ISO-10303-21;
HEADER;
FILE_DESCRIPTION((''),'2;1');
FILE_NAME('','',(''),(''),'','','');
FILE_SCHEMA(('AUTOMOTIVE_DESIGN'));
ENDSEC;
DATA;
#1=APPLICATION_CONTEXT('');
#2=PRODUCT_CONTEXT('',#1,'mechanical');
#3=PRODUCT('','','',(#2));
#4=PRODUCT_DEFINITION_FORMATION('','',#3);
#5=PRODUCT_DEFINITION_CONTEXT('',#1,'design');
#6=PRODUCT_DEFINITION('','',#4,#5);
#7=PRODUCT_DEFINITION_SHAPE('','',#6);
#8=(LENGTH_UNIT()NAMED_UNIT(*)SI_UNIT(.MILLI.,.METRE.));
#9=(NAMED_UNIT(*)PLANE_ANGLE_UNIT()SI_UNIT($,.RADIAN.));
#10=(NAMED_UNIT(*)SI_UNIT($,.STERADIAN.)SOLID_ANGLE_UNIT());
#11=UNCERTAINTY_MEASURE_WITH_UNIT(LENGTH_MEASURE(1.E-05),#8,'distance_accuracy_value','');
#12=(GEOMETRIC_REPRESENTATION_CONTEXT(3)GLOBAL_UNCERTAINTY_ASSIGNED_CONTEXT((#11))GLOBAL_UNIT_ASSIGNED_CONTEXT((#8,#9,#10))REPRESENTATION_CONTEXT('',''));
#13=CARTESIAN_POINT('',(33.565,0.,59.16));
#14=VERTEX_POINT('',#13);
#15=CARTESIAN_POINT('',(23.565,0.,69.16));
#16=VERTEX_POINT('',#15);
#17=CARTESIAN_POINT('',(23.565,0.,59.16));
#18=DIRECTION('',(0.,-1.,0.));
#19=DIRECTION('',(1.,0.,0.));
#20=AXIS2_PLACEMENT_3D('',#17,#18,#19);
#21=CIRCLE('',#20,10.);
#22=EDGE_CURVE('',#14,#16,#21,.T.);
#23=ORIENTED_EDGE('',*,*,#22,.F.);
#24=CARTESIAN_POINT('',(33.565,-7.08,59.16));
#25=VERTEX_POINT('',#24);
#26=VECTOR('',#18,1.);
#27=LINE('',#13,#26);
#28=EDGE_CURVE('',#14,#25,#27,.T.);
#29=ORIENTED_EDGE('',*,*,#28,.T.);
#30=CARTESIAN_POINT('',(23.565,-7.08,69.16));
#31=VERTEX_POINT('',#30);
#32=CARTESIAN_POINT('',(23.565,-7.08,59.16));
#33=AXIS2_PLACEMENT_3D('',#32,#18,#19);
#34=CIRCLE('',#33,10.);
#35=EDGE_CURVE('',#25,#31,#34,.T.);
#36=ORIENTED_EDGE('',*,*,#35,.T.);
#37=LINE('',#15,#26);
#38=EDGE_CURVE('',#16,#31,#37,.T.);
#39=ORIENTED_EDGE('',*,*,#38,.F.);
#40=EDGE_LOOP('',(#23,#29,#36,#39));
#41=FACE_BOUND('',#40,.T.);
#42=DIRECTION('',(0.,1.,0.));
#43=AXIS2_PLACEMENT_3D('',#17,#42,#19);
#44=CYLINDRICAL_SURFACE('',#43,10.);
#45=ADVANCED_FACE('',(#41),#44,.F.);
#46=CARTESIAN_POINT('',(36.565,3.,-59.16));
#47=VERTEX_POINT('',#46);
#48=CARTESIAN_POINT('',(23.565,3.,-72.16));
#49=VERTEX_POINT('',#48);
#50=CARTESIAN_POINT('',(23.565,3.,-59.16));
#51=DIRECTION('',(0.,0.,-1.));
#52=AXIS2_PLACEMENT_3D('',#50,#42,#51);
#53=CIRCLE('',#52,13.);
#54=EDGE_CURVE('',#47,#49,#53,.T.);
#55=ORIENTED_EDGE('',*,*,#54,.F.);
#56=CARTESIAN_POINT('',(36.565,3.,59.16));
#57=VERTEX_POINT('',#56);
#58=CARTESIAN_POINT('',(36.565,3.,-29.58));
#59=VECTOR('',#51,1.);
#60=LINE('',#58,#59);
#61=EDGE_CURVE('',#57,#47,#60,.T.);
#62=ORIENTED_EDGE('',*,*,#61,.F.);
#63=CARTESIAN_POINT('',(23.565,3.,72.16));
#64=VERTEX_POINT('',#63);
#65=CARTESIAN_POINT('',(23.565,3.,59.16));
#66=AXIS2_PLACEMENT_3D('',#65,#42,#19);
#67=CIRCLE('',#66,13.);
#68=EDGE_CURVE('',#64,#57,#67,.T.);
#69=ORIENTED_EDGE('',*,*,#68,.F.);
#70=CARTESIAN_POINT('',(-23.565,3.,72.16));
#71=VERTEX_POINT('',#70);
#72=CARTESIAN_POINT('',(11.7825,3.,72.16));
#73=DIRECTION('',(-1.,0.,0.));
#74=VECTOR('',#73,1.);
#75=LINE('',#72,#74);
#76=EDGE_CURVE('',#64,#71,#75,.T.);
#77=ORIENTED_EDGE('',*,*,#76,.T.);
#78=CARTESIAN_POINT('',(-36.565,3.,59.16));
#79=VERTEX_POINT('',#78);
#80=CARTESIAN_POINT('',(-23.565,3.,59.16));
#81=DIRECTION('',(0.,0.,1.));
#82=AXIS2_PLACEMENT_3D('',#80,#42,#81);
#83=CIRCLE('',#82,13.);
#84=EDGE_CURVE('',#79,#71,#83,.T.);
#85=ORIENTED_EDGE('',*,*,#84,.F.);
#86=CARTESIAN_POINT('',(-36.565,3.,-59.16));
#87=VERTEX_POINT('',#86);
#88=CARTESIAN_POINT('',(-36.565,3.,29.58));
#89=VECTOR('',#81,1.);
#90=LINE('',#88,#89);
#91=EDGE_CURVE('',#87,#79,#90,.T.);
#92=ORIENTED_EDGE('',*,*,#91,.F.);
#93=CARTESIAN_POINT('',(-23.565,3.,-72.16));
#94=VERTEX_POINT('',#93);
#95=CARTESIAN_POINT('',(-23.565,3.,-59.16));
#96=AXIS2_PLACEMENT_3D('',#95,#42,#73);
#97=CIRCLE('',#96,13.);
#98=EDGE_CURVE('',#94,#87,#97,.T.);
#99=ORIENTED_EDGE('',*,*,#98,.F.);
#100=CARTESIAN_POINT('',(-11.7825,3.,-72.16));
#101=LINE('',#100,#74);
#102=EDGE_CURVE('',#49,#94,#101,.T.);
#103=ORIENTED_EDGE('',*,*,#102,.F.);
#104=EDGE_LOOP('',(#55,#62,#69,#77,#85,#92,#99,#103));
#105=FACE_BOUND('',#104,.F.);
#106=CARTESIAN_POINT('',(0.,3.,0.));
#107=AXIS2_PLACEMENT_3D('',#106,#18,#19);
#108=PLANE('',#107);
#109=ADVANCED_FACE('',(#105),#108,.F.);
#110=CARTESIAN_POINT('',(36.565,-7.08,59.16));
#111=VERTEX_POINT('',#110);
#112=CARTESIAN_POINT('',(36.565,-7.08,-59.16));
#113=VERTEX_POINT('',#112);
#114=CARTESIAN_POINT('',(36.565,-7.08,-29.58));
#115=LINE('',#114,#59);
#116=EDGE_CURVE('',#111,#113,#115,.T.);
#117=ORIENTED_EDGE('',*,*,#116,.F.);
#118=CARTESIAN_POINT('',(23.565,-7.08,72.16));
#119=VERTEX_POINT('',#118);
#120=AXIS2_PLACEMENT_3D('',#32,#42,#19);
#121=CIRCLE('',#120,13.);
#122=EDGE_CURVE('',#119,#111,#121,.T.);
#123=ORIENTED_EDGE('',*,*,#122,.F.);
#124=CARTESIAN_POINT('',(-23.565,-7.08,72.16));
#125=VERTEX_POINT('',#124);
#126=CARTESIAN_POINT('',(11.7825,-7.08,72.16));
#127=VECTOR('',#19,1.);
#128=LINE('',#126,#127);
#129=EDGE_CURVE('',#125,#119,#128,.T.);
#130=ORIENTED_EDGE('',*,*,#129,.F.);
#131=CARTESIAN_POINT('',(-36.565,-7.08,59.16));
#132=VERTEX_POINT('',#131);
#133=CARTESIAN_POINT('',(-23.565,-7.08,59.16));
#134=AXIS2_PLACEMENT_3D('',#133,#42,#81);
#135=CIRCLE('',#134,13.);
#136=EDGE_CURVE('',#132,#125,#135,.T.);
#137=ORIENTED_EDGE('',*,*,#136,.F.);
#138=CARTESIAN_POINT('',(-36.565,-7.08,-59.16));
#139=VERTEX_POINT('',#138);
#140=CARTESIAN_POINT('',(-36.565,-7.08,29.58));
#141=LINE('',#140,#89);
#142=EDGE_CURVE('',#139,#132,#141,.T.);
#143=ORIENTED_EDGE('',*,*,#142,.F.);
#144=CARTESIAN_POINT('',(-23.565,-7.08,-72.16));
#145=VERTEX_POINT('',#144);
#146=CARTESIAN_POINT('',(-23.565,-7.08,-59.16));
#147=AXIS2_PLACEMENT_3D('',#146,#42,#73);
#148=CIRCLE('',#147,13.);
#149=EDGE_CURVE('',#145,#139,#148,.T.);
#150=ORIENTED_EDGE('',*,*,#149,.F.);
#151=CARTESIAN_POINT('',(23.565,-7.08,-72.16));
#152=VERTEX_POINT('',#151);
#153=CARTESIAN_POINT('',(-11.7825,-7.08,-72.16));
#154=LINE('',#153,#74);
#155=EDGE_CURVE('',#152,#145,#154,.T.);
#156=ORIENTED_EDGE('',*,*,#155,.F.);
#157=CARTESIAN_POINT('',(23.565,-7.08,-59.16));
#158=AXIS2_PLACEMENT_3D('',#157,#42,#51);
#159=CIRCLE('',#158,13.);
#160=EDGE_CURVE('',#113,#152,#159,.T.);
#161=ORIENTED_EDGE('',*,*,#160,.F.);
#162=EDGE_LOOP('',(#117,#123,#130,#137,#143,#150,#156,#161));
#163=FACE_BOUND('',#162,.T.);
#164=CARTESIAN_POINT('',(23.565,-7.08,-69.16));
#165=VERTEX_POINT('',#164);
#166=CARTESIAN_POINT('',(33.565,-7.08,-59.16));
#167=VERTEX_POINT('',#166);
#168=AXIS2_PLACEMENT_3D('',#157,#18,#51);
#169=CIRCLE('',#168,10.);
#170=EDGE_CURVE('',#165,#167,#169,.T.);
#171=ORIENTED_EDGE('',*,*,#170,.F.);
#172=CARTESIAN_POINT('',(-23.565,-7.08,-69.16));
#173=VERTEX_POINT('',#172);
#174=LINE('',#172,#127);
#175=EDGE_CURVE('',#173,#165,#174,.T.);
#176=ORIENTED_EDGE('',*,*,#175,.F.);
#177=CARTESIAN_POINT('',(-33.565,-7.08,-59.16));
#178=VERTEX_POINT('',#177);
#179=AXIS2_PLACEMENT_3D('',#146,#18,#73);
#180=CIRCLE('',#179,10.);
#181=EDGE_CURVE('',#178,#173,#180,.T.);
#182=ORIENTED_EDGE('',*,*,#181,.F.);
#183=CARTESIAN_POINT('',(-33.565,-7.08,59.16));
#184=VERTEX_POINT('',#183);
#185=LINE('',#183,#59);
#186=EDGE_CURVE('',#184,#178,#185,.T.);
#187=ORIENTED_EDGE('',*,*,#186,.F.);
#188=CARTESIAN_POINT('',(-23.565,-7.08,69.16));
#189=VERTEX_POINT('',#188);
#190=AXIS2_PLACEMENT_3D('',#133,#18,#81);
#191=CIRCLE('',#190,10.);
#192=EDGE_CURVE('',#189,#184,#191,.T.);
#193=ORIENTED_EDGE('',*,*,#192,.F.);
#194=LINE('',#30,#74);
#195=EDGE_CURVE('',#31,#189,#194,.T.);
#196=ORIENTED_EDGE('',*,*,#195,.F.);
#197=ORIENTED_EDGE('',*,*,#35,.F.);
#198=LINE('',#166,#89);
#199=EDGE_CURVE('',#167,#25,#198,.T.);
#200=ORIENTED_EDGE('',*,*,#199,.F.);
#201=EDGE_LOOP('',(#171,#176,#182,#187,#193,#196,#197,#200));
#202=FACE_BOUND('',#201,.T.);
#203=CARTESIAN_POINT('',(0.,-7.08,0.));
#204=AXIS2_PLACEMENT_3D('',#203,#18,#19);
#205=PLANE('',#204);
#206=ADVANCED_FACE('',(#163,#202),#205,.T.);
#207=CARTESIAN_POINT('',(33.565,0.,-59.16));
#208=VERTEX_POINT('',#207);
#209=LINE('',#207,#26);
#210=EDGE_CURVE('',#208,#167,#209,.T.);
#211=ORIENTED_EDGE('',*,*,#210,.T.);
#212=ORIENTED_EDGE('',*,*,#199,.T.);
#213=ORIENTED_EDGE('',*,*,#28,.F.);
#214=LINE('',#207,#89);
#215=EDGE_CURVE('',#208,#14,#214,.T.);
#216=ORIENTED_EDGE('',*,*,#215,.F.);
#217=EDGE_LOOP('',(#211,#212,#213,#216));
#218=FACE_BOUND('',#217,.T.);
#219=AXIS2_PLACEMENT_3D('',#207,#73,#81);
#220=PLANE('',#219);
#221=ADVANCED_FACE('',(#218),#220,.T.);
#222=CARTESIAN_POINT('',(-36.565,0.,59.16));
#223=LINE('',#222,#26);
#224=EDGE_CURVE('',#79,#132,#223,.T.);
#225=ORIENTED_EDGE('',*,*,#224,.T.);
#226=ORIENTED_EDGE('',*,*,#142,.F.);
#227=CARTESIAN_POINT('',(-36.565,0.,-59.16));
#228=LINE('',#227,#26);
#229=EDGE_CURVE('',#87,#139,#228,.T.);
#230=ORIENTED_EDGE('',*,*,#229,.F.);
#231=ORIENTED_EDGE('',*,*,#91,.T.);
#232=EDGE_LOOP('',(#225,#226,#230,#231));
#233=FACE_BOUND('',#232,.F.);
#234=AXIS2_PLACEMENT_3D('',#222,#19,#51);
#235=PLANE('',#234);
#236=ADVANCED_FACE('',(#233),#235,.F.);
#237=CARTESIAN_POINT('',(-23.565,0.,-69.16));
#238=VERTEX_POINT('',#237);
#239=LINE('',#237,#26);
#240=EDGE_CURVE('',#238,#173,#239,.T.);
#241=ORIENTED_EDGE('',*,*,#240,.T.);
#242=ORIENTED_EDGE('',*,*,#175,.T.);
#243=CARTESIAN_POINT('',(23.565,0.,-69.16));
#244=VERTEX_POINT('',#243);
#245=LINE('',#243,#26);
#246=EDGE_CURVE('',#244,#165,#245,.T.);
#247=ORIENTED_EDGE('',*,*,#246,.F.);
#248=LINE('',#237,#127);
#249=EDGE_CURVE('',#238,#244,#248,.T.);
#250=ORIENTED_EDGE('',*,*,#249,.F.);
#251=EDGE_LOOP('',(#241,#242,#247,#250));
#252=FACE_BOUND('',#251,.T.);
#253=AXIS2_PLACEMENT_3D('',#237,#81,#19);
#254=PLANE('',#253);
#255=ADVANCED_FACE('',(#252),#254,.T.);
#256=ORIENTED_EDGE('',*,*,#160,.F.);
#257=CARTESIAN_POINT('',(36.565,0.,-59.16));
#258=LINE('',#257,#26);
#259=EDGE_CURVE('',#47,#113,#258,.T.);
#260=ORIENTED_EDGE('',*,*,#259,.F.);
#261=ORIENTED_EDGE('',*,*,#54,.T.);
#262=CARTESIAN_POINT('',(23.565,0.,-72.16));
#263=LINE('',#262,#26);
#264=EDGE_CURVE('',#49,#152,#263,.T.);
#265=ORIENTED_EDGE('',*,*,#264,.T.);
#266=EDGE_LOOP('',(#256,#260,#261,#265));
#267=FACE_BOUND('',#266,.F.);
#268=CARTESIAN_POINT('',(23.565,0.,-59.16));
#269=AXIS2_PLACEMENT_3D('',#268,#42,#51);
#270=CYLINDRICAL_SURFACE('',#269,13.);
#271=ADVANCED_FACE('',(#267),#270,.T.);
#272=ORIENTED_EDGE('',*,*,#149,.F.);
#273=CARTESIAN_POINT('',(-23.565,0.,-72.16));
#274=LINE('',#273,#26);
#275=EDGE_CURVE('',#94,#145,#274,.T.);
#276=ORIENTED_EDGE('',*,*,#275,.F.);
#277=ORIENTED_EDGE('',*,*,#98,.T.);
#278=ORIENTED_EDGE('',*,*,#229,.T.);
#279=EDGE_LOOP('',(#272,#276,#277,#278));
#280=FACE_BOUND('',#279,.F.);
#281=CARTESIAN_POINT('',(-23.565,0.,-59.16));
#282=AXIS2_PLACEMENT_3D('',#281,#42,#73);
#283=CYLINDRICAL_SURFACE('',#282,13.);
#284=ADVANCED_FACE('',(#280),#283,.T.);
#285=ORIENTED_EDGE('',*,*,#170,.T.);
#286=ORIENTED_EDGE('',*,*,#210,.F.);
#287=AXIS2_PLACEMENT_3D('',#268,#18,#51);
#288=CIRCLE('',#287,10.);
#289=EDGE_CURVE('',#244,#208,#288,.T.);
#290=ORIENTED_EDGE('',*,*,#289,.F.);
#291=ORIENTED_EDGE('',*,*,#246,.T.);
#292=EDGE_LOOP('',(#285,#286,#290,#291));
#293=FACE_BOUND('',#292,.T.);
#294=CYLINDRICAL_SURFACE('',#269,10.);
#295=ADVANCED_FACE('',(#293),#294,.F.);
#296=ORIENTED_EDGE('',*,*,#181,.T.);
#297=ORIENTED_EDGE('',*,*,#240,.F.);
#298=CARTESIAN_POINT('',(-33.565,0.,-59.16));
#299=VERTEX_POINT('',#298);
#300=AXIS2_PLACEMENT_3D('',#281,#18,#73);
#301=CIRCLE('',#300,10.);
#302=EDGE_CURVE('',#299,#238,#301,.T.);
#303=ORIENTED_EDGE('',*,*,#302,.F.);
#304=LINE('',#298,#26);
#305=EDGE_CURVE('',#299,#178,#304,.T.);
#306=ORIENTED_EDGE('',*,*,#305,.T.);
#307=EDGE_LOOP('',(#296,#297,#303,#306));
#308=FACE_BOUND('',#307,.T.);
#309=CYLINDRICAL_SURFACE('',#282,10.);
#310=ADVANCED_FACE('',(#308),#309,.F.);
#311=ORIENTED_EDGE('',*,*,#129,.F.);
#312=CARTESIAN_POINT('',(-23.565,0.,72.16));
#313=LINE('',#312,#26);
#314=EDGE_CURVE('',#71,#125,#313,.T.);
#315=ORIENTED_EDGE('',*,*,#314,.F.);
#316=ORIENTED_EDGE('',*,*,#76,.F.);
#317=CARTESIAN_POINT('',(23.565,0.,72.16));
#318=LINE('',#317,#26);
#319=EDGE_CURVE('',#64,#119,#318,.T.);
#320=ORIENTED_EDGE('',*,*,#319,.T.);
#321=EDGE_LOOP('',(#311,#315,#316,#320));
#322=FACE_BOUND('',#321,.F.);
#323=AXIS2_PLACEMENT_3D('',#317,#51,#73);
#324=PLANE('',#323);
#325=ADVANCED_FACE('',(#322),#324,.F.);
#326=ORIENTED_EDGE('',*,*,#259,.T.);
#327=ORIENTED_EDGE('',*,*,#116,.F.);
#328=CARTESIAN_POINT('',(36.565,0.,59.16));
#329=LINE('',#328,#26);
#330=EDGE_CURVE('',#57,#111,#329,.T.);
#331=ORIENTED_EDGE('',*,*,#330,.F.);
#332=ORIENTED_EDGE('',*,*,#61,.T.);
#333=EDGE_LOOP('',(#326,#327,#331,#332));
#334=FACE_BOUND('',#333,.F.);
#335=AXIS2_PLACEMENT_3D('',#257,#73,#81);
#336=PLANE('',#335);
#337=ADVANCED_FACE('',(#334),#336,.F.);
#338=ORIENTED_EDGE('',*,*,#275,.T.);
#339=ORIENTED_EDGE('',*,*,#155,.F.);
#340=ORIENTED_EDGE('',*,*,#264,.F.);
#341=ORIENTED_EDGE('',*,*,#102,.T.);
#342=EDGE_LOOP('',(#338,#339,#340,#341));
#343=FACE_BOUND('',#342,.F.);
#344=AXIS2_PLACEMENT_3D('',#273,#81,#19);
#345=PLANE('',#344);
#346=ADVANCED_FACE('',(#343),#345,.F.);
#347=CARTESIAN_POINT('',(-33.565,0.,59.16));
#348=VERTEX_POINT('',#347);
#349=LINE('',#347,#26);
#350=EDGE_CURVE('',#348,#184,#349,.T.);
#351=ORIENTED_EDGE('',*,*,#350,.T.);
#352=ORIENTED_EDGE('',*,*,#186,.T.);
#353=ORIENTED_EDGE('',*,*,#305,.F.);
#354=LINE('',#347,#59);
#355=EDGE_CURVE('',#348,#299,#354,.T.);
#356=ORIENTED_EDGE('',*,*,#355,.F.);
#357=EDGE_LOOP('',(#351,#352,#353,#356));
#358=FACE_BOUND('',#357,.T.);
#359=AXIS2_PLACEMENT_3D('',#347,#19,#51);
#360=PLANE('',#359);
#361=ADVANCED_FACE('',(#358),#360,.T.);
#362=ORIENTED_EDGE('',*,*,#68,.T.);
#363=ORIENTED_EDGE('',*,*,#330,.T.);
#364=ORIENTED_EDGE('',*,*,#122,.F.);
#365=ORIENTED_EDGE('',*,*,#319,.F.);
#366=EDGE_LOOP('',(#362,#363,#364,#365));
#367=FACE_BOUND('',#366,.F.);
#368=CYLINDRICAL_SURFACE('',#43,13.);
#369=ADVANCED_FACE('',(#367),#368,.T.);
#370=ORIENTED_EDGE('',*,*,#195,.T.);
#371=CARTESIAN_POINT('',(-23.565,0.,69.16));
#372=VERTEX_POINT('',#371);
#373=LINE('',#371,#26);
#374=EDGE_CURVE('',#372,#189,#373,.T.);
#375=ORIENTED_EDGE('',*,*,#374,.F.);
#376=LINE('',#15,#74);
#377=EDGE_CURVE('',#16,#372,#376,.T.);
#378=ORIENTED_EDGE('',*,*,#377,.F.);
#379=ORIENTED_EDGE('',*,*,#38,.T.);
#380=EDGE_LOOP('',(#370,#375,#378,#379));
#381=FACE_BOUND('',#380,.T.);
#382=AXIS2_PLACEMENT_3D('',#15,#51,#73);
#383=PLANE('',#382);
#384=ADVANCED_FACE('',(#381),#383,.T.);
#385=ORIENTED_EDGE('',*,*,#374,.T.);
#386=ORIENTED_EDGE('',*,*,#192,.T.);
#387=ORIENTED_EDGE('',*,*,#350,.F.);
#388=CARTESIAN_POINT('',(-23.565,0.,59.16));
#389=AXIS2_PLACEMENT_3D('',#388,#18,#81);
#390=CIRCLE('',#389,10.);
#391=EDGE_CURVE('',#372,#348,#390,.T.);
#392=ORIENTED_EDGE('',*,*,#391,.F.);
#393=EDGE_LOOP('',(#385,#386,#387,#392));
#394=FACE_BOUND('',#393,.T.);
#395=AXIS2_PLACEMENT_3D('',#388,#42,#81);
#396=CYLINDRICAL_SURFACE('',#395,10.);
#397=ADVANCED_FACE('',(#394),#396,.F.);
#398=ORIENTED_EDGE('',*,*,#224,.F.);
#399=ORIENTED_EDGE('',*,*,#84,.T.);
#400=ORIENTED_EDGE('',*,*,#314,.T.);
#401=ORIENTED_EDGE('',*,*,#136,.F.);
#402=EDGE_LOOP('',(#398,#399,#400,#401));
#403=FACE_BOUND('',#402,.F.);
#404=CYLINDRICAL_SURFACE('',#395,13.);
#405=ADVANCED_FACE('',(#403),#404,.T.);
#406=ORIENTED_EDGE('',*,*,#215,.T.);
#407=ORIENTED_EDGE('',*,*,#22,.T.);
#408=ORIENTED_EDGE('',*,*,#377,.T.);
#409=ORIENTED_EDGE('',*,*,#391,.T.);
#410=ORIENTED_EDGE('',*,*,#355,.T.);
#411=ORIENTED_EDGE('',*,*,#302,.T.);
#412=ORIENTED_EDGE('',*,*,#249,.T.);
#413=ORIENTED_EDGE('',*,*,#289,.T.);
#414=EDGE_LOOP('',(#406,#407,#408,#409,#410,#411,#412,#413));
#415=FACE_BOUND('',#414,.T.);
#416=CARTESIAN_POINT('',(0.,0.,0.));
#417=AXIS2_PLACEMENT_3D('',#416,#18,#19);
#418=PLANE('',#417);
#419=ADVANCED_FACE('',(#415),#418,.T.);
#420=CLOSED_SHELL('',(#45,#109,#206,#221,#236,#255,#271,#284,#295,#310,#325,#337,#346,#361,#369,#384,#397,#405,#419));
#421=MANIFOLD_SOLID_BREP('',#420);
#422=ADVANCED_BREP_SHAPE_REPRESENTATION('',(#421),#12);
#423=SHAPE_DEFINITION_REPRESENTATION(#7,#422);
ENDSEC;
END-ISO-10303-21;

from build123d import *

# Parameters (mm, degrees)
F0_R     = 4.69
F0_W     = 58.73
F0_H     = 103.15
F0_R_2   = 2.195
F0_R_3   = 1.058193308
F0_R_4   = 5.3501775611
F1_DEPTH = 7.08
F2_DEPTH = 7.08
F4_DEPTH = 0.8
F5_T     = 3


# Not quite as in the source:
# - a feature of the source that left no trace in its solid (it failed there, or was rolled back) is left out


with BuildPart() as f1:
    # F0 (on Front) → F1 (new body)
    with BuildSketch(Plane.XZ):
        with BuildLine():
            Line((23.565, 69.16), (-23.565, 69.16))
            ThreePointArc((-23.565, 69.16), (-30.6360678119, 66.2310678119), (-33.565, 59.16))
            Line((-33.565, 59.16), (-33.565, -59.16))
            ThreePointArc((-33.565, -59.16), (-30.6360678119, -66.2310678119), (-23.565, -69.16))
            Line((-23.565, -69.16), (23.565, -69.16))
            ThreePointArc((23.565, -69.16), (30.6360678119, -66.2310678119), (33.565, -59.16))
            Line((33.565, -59.16), (33.565, 59.16))
            ThreePointArc((33.565, 59.16), (30.6360678119, 66.2310678119), (23.565, 69.16))
        make_face()
        with Locations((0, -60.0285455585)):
            Circle(F0_R, mode=Mode.SUBTRACT)
        Rectangle(F0_W, F0_H, mode=Mode.SUBTRACT)
        with Locations((10.2654388174, 59.16)):
            Circle(F0_R_2, mode=Mode.SUBTRACT)
        with Locations((14.2954164479, 59.1465724891)):
            Circle(F0_R_3, mode=Mode.SUBTRACT)
        with Locations((21.3369000703, 59.16)):
            Circle(F0_R_4, mode=Mode.SUBTRACT)
        Rectangle(F0_W, F0_H)
        with Locations((21.3369000703, 59.16)):
            Circle(F0_R_4)
        with Locations((0, -60.0285455585)):
            Circle(F0_R)
        with Locations((10.2654388174, 59.16)):
            Circle(F0_R_2)
        with Locations((14.2954164479, 59.1465724891)):
            Circle(F0_R_3)
    extrude(amount=F1_DEPTH)

    # F0 (on Front) → F2 (join)
    with BuildSketch(Plane.XZ):
        Rectangle(F0_W, F0_H)
        with Locations((0, -60.0285455585)):
            Circle(F0_R)
    extrude(amount=F2_DEPTH)

    # F0 (on Front) → F4 (join)
    with BuildSketch(Plane.XZ):
        with Locations((21.3369000703, 59.16)):
            Circle(F0_R_4)
    extrude(amount=F4_DEPTH)

    # F5
    f5_openings = [f1.faces().sort_by_distance(p)[0] for p in [
        (0, -7.08, 0),
    ]]
    offset(amount=F5_T, openings=f5_openings, kind=Kind.INTERSECTION)


solid = f1.part
